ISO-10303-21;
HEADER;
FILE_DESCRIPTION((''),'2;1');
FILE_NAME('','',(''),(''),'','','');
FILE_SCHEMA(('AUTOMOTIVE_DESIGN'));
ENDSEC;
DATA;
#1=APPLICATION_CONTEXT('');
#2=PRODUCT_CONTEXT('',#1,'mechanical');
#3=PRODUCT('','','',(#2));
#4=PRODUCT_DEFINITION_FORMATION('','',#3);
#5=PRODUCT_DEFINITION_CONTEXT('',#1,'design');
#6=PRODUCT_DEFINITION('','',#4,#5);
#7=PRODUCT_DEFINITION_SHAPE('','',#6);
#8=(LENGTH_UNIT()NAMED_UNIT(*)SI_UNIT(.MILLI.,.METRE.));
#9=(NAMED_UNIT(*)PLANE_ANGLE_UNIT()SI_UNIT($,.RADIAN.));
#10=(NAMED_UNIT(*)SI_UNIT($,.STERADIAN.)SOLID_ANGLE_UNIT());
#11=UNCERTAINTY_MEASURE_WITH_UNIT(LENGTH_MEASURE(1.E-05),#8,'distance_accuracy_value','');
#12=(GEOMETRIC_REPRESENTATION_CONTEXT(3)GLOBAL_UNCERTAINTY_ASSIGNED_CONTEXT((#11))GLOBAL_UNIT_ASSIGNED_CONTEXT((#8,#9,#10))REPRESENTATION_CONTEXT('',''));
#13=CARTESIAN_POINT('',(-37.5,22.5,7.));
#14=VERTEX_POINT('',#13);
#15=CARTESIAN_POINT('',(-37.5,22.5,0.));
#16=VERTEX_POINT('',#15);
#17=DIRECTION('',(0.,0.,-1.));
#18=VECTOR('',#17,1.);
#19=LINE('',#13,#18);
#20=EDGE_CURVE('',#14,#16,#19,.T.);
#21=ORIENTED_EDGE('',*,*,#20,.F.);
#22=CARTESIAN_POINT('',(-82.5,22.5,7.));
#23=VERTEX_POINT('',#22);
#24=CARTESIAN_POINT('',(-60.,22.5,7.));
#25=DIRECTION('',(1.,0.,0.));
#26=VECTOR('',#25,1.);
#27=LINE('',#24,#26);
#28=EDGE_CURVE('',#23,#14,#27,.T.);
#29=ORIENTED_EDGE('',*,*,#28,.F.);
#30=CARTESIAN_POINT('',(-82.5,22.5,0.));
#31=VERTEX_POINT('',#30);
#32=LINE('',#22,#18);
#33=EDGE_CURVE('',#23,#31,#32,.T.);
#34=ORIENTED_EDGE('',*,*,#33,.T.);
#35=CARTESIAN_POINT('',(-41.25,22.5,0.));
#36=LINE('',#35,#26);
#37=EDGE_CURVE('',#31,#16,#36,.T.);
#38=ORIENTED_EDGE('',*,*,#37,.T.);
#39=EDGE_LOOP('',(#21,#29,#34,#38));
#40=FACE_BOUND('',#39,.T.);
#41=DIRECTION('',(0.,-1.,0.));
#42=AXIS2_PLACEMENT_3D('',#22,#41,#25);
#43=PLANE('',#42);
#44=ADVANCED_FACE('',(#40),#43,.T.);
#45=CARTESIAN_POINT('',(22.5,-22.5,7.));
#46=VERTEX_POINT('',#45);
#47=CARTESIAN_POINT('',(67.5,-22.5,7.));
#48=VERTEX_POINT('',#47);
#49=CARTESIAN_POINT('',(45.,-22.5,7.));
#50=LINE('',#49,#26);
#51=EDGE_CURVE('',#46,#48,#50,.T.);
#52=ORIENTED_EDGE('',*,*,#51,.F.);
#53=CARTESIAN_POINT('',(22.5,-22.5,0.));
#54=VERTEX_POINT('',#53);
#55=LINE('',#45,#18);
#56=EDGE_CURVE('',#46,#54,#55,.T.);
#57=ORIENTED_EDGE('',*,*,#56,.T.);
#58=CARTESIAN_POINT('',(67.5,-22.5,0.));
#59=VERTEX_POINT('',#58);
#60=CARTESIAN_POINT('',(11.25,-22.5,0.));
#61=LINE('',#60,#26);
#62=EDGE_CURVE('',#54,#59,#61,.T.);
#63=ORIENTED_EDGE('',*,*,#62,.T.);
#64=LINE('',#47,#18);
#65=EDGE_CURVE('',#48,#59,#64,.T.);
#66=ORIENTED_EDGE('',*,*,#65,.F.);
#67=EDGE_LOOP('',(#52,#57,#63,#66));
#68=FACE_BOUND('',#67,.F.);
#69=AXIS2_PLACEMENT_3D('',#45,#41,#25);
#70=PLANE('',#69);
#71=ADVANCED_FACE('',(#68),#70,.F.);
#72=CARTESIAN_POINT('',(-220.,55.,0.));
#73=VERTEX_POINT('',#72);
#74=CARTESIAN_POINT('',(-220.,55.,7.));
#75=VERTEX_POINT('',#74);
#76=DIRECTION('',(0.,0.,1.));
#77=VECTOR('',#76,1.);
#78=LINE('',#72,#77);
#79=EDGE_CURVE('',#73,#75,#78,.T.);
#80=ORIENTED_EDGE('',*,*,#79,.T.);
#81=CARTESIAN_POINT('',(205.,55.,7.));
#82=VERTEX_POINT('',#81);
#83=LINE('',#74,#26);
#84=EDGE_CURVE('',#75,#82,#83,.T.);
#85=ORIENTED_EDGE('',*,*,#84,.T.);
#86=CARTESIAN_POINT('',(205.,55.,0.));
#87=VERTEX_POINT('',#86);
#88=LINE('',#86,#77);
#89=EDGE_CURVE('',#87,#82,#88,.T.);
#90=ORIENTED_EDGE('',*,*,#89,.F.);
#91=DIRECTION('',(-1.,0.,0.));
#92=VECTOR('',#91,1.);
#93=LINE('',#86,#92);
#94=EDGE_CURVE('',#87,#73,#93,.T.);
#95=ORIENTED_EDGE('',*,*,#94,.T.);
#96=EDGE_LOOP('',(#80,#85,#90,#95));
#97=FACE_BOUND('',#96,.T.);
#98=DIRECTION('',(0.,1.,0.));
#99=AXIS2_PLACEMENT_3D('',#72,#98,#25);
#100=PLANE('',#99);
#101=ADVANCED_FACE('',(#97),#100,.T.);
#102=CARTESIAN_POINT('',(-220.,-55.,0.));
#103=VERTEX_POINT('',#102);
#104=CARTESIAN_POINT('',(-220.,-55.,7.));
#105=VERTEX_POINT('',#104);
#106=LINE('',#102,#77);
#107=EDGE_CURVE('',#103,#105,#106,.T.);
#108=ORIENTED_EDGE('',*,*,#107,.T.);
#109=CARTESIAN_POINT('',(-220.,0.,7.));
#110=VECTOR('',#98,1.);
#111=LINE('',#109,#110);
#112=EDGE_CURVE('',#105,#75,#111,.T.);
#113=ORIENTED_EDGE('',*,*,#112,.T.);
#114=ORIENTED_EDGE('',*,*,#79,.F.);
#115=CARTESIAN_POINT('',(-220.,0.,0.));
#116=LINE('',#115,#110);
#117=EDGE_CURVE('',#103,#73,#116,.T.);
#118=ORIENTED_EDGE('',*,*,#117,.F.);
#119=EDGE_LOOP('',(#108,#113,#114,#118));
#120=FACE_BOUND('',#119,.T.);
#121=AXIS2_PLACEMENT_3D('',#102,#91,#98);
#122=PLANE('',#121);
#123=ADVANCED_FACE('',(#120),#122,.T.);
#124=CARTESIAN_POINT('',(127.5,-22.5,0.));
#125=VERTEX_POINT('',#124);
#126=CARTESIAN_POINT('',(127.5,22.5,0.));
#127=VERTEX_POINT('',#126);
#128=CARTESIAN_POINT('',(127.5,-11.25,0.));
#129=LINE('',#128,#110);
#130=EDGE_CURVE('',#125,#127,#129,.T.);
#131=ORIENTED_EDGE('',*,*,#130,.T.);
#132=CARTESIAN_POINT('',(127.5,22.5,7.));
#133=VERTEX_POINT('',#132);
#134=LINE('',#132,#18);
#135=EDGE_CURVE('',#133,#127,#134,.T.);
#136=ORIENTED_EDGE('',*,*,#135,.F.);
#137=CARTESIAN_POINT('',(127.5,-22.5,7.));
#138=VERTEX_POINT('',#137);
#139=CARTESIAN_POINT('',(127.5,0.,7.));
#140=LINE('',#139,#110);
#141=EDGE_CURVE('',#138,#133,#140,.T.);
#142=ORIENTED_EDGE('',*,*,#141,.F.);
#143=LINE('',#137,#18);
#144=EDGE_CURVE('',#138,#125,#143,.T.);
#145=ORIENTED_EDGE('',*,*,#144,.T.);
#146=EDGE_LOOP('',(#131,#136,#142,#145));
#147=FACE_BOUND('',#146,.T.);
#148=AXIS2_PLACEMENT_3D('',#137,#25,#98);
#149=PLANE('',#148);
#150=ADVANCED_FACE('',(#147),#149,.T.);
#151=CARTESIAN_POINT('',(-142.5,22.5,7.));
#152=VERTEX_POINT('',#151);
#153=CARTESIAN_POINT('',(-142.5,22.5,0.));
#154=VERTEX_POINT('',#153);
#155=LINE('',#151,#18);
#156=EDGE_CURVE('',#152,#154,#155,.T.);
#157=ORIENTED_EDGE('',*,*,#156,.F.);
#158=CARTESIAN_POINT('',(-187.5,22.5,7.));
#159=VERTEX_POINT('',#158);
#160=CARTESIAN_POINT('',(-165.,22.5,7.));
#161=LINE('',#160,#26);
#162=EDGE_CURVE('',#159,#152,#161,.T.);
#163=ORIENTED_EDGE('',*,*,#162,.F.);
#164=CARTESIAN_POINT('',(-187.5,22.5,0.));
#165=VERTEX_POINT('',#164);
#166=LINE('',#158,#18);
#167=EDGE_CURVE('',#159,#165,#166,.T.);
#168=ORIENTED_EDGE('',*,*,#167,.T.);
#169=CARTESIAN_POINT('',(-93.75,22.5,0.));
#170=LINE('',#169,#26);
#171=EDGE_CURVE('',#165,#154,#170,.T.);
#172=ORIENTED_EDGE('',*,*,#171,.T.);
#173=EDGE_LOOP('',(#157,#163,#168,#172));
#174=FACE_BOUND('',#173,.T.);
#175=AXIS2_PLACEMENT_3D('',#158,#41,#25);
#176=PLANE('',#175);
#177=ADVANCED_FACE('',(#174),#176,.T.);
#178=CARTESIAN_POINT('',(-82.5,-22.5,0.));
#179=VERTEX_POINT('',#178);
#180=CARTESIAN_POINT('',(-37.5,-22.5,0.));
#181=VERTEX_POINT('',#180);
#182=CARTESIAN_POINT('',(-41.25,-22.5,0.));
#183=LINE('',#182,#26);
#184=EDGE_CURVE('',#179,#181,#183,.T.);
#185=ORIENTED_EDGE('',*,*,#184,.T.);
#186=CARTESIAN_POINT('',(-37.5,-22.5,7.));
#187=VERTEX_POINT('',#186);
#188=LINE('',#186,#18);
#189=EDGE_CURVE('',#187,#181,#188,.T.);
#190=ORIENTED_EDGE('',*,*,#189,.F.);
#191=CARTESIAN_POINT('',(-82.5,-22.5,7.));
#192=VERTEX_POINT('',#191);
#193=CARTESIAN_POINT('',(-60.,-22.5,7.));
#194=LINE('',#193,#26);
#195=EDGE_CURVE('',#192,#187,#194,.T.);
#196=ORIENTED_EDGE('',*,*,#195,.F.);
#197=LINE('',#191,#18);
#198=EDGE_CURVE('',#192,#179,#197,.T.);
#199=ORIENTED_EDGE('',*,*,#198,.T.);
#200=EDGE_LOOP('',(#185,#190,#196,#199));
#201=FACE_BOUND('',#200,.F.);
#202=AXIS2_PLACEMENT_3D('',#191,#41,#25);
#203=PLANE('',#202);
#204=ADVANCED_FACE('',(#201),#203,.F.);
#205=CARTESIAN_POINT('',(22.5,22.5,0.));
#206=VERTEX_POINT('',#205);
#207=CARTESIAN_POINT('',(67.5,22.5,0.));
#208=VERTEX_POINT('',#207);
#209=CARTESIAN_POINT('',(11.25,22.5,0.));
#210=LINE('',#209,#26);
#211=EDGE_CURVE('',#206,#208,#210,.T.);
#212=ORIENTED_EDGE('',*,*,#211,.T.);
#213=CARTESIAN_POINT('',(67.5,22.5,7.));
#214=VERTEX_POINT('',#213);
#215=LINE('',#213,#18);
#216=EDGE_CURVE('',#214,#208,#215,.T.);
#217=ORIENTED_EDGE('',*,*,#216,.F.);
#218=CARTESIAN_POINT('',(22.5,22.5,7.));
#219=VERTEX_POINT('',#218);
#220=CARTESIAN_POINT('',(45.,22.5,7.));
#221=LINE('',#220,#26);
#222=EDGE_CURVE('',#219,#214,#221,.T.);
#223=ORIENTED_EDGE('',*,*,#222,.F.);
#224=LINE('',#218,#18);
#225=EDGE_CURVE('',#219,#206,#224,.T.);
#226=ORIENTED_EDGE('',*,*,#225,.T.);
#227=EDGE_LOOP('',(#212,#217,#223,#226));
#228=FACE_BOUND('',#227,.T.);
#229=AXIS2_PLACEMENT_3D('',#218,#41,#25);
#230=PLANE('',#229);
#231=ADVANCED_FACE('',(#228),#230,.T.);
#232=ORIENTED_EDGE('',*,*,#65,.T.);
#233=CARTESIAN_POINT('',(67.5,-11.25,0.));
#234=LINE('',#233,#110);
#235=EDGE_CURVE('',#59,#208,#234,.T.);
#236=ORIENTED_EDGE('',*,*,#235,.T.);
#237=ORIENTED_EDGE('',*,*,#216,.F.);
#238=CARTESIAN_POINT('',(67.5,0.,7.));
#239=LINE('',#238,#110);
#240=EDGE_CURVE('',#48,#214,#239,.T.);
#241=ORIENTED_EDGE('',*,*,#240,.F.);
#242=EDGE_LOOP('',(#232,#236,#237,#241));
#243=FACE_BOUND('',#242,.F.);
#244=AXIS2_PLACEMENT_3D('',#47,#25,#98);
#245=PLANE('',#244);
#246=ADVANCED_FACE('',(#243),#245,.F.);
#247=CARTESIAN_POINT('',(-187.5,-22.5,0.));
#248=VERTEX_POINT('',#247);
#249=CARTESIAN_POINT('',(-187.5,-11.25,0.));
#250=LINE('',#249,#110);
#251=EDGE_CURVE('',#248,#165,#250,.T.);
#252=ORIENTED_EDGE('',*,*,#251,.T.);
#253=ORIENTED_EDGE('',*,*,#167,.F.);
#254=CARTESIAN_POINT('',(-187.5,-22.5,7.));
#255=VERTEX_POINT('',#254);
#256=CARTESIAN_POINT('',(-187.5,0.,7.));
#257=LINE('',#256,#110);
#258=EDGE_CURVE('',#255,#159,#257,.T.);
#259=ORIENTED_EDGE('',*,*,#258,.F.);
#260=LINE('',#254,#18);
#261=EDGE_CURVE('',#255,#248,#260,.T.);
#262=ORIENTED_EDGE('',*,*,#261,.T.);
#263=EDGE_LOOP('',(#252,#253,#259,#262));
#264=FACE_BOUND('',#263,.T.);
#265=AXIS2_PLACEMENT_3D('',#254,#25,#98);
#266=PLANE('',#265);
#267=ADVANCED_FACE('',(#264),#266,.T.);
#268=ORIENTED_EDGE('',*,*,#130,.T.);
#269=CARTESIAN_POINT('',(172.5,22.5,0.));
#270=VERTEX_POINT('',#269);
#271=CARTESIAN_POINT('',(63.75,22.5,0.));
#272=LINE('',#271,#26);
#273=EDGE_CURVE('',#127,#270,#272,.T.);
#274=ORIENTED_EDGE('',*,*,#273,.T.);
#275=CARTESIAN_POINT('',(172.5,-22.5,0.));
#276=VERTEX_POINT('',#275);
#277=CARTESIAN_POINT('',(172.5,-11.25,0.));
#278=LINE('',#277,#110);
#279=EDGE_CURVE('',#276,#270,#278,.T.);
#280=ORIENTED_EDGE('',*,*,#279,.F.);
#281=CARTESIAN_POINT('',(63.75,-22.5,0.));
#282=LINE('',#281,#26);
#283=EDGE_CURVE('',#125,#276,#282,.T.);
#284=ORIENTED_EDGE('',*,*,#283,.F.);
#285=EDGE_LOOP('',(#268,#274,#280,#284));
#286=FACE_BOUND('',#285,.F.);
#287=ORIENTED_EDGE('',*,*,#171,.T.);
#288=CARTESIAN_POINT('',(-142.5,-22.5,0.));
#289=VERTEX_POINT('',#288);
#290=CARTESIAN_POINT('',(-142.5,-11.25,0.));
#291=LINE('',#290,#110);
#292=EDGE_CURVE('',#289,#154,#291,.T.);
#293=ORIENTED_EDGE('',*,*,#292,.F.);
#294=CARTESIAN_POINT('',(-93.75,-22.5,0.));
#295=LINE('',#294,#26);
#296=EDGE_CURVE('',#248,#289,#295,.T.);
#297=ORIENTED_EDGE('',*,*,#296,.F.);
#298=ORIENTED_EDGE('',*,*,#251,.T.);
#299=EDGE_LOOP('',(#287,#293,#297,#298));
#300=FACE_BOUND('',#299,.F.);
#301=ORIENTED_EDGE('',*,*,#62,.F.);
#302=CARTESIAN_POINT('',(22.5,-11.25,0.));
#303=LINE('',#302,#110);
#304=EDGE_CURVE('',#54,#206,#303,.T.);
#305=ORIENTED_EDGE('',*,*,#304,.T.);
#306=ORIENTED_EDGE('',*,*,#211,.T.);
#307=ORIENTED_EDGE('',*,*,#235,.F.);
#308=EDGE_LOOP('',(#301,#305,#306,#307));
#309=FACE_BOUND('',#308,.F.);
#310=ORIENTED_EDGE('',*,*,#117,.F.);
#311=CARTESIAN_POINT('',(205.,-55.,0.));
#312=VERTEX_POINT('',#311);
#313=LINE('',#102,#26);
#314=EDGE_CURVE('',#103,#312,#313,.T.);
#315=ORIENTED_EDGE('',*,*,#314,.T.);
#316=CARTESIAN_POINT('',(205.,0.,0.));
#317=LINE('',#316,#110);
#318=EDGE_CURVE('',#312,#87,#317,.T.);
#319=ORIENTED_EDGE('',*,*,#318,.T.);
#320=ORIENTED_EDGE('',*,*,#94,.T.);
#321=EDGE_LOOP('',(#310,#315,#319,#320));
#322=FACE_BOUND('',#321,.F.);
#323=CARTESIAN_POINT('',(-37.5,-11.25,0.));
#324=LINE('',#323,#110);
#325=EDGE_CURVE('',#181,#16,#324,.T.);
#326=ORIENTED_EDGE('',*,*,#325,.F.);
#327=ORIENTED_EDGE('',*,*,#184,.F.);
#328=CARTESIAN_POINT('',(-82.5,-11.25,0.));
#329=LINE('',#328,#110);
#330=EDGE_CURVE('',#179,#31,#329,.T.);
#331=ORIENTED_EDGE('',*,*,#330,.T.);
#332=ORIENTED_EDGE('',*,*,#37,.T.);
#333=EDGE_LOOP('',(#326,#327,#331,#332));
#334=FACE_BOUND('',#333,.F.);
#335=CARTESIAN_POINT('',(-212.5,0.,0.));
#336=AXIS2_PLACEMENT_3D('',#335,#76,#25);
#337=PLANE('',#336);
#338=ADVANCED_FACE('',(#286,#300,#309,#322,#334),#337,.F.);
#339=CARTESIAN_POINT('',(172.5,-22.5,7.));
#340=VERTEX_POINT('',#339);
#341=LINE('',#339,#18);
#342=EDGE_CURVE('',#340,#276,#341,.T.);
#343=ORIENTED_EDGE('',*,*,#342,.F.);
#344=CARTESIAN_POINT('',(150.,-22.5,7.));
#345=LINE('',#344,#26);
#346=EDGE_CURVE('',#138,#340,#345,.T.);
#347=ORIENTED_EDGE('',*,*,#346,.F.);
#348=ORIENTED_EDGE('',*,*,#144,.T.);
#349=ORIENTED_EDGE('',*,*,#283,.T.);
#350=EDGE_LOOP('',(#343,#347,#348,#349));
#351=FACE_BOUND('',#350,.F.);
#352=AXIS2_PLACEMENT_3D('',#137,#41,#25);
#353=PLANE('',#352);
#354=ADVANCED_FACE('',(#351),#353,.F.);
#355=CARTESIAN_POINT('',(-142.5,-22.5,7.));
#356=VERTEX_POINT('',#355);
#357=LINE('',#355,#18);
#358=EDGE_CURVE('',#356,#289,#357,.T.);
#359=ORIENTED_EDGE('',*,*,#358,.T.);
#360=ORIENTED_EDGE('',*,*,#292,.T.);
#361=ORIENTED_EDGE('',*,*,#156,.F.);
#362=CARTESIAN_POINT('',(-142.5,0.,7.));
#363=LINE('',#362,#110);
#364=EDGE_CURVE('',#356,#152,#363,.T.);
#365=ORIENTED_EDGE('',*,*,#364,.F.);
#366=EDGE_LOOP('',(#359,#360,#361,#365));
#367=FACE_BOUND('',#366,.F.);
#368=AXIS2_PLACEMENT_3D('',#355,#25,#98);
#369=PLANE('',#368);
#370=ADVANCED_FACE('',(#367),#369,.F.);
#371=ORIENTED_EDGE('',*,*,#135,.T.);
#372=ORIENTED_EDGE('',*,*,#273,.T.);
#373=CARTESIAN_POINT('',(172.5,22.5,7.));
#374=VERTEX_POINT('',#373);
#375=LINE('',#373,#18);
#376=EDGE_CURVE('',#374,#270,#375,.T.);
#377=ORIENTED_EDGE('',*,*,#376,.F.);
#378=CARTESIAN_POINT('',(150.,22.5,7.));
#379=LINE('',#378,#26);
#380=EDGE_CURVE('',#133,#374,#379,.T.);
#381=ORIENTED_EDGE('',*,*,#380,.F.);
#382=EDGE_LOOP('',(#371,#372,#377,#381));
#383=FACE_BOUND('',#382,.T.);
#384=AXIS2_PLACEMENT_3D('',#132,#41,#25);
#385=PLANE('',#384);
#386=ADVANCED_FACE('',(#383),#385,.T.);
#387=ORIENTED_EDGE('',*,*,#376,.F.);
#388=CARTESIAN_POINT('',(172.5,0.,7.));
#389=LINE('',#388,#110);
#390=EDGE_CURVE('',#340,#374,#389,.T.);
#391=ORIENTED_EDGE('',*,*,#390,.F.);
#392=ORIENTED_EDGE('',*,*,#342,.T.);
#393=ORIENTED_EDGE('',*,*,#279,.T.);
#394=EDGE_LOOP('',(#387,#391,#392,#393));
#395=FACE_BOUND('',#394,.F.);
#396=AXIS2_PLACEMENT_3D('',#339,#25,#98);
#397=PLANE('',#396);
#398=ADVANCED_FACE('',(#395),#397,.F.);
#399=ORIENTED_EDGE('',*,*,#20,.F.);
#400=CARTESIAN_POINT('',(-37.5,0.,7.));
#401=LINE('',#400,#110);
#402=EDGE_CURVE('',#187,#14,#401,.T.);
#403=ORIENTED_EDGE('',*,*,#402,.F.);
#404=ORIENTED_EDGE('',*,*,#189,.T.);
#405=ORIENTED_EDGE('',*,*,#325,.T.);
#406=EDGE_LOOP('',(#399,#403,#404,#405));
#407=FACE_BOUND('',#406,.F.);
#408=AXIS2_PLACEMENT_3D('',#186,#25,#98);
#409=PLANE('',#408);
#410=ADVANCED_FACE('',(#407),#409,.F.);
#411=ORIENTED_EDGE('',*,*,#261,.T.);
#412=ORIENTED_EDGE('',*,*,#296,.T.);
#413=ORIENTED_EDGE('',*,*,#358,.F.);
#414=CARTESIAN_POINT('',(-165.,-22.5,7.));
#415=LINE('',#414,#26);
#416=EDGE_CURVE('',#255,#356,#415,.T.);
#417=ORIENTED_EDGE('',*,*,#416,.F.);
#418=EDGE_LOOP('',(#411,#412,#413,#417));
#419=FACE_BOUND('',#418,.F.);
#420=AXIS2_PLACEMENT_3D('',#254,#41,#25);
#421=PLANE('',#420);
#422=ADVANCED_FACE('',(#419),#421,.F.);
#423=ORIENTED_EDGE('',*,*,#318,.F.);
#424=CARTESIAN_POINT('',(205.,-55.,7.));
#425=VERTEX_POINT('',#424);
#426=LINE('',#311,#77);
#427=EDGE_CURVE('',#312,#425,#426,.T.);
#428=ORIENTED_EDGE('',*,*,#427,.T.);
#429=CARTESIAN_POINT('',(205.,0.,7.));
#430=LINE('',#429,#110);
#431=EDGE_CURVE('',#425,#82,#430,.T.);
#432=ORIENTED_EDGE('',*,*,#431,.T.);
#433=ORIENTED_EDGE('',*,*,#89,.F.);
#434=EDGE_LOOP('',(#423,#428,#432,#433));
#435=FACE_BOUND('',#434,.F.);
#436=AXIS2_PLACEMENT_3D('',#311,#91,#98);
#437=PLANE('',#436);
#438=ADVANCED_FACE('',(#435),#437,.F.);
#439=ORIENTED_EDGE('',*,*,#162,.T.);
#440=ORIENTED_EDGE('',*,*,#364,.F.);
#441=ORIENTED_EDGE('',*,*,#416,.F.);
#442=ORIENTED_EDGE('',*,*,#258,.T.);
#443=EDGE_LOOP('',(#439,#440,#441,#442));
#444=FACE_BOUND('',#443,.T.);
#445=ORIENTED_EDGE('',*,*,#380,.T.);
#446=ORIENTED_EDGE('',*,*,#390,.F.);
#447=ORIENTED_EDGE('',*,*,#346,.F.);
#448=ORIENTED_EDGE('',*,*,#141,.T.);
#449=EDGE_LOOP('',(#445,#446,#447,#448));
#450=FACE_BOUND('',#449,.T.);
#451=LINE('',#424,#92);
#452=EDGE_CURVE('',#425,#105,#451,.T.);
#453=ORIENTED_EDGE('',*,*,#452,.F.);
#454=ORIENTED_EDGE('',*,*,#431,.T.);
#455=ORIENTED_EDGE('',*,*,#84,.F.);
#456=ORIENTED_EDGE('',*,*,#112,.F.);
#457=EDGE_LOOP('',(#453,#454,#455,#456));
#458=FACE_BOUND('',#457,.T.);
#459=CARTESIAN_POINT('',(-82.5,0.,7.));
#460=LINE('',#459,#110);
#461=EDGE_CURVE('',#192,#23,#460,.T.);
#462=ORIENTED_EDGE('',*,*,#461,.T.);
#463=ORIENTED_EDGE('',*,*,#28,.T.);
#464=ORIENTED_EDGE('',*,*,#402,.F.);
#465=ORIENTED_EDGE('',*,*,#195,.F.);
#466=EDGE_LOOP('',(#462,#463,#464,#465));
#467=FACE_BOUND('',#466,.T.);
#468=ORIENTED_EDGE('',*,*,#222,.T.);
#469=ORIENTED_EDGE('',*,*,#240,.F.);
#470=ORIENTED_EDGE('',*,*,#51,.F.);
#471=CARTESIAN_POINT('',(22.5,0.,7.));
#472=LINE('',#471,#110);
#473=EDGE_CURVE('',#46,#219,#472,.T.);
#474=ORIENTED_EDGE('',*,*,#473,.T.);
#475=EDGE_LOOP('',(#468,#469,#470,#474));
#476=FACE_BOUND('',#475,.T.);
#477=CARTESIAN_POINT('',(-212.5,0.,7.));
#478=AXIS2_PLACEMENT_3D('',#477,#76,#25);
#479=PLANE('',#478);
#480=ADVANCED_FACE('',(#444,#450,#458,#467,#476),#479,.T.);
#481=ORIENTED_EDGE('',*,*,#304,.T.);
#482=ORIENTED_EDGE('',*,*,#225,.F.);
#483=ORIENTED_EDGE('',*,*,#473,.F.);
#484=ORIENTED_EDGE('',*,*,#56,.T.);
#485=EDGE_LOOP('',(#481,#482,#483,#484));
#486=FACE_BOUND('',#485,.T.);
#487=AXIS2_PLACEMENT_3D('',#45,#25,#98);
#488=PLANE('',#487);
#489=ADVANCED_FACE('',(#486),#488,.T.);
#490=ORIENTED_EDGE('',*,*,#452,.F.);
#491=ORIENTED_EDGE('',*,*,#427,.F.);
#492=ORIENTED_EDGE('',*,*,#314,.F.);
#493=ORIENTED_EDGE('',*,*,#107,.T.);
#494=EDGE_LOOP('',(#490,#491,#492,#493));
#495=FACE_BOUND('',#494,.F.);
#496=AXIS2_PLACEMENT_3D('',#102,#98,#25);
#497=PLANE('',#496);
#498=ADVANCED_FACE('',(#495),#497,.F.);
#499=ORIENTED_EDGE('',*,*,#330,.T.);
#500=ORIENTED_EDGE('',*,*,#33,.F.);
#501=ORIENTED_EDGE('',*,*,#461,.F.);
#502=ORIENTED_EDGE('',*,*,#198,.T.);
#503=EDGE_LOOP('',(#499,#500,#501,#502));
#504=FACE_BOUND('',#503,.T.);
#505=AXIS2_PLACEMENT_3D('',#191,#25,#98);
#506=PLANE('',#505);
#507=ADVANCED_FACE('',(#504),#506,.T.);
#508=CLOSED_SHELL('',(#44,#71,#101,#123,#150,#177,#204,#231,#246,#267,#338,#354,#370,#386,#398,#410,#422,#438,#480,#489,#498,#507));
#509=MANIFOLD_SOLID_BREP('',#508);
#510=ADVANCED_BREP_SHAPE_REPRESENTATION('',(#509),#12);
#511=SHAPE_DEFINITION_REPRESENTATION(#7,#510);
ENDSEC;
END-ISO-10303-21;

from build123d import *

# Parameters (mm, degrees)
F0_W     = 410
F0_H     = 110
F1_DEPTH = 7
F2_W     = 45
F2_H     = 45
F3_DEPTH = 25
F0_W_2   = 15
F4_DEPTH = 7


# Not quite as in the source:
# - a feature names something its author has since deleted; it is built from what else it names


with BuildPart() as f1:
    # F0 (on Top) → F1 (new body)
    with BuildSketch(Plane.XY):
        Rectangle(F0_W, F0_H)
    extrude(amount=F1_DEPTH)

    # F2 (on face) → F3 (cut)
    with BuildSketch(Plane.XY.offset(7)):
        with Locations((-60, 0)):
            Rectangle(F2_W, F2_H)
        with Locations((45, 0)):
            Rectangle(F2_W, F2_H)
        with Locations((150, 0)):
            Rectangle(F2_W, F2_H)
        with Locations((-165, 0)):
            Rectangle(F2_W, F2_H)
    extrude(amount=-F3_DEPTH, mode=Mode.SUBTRACT)

    # F0 (on Top) → F4 (join)
    with BuildSketch(Plane.XY):
        with Locations((-212.5, 0)):
            Rectangle(F0_W_2, F0_H)
    extrude(amount=F4_DEPTH)


solid = f1.part
